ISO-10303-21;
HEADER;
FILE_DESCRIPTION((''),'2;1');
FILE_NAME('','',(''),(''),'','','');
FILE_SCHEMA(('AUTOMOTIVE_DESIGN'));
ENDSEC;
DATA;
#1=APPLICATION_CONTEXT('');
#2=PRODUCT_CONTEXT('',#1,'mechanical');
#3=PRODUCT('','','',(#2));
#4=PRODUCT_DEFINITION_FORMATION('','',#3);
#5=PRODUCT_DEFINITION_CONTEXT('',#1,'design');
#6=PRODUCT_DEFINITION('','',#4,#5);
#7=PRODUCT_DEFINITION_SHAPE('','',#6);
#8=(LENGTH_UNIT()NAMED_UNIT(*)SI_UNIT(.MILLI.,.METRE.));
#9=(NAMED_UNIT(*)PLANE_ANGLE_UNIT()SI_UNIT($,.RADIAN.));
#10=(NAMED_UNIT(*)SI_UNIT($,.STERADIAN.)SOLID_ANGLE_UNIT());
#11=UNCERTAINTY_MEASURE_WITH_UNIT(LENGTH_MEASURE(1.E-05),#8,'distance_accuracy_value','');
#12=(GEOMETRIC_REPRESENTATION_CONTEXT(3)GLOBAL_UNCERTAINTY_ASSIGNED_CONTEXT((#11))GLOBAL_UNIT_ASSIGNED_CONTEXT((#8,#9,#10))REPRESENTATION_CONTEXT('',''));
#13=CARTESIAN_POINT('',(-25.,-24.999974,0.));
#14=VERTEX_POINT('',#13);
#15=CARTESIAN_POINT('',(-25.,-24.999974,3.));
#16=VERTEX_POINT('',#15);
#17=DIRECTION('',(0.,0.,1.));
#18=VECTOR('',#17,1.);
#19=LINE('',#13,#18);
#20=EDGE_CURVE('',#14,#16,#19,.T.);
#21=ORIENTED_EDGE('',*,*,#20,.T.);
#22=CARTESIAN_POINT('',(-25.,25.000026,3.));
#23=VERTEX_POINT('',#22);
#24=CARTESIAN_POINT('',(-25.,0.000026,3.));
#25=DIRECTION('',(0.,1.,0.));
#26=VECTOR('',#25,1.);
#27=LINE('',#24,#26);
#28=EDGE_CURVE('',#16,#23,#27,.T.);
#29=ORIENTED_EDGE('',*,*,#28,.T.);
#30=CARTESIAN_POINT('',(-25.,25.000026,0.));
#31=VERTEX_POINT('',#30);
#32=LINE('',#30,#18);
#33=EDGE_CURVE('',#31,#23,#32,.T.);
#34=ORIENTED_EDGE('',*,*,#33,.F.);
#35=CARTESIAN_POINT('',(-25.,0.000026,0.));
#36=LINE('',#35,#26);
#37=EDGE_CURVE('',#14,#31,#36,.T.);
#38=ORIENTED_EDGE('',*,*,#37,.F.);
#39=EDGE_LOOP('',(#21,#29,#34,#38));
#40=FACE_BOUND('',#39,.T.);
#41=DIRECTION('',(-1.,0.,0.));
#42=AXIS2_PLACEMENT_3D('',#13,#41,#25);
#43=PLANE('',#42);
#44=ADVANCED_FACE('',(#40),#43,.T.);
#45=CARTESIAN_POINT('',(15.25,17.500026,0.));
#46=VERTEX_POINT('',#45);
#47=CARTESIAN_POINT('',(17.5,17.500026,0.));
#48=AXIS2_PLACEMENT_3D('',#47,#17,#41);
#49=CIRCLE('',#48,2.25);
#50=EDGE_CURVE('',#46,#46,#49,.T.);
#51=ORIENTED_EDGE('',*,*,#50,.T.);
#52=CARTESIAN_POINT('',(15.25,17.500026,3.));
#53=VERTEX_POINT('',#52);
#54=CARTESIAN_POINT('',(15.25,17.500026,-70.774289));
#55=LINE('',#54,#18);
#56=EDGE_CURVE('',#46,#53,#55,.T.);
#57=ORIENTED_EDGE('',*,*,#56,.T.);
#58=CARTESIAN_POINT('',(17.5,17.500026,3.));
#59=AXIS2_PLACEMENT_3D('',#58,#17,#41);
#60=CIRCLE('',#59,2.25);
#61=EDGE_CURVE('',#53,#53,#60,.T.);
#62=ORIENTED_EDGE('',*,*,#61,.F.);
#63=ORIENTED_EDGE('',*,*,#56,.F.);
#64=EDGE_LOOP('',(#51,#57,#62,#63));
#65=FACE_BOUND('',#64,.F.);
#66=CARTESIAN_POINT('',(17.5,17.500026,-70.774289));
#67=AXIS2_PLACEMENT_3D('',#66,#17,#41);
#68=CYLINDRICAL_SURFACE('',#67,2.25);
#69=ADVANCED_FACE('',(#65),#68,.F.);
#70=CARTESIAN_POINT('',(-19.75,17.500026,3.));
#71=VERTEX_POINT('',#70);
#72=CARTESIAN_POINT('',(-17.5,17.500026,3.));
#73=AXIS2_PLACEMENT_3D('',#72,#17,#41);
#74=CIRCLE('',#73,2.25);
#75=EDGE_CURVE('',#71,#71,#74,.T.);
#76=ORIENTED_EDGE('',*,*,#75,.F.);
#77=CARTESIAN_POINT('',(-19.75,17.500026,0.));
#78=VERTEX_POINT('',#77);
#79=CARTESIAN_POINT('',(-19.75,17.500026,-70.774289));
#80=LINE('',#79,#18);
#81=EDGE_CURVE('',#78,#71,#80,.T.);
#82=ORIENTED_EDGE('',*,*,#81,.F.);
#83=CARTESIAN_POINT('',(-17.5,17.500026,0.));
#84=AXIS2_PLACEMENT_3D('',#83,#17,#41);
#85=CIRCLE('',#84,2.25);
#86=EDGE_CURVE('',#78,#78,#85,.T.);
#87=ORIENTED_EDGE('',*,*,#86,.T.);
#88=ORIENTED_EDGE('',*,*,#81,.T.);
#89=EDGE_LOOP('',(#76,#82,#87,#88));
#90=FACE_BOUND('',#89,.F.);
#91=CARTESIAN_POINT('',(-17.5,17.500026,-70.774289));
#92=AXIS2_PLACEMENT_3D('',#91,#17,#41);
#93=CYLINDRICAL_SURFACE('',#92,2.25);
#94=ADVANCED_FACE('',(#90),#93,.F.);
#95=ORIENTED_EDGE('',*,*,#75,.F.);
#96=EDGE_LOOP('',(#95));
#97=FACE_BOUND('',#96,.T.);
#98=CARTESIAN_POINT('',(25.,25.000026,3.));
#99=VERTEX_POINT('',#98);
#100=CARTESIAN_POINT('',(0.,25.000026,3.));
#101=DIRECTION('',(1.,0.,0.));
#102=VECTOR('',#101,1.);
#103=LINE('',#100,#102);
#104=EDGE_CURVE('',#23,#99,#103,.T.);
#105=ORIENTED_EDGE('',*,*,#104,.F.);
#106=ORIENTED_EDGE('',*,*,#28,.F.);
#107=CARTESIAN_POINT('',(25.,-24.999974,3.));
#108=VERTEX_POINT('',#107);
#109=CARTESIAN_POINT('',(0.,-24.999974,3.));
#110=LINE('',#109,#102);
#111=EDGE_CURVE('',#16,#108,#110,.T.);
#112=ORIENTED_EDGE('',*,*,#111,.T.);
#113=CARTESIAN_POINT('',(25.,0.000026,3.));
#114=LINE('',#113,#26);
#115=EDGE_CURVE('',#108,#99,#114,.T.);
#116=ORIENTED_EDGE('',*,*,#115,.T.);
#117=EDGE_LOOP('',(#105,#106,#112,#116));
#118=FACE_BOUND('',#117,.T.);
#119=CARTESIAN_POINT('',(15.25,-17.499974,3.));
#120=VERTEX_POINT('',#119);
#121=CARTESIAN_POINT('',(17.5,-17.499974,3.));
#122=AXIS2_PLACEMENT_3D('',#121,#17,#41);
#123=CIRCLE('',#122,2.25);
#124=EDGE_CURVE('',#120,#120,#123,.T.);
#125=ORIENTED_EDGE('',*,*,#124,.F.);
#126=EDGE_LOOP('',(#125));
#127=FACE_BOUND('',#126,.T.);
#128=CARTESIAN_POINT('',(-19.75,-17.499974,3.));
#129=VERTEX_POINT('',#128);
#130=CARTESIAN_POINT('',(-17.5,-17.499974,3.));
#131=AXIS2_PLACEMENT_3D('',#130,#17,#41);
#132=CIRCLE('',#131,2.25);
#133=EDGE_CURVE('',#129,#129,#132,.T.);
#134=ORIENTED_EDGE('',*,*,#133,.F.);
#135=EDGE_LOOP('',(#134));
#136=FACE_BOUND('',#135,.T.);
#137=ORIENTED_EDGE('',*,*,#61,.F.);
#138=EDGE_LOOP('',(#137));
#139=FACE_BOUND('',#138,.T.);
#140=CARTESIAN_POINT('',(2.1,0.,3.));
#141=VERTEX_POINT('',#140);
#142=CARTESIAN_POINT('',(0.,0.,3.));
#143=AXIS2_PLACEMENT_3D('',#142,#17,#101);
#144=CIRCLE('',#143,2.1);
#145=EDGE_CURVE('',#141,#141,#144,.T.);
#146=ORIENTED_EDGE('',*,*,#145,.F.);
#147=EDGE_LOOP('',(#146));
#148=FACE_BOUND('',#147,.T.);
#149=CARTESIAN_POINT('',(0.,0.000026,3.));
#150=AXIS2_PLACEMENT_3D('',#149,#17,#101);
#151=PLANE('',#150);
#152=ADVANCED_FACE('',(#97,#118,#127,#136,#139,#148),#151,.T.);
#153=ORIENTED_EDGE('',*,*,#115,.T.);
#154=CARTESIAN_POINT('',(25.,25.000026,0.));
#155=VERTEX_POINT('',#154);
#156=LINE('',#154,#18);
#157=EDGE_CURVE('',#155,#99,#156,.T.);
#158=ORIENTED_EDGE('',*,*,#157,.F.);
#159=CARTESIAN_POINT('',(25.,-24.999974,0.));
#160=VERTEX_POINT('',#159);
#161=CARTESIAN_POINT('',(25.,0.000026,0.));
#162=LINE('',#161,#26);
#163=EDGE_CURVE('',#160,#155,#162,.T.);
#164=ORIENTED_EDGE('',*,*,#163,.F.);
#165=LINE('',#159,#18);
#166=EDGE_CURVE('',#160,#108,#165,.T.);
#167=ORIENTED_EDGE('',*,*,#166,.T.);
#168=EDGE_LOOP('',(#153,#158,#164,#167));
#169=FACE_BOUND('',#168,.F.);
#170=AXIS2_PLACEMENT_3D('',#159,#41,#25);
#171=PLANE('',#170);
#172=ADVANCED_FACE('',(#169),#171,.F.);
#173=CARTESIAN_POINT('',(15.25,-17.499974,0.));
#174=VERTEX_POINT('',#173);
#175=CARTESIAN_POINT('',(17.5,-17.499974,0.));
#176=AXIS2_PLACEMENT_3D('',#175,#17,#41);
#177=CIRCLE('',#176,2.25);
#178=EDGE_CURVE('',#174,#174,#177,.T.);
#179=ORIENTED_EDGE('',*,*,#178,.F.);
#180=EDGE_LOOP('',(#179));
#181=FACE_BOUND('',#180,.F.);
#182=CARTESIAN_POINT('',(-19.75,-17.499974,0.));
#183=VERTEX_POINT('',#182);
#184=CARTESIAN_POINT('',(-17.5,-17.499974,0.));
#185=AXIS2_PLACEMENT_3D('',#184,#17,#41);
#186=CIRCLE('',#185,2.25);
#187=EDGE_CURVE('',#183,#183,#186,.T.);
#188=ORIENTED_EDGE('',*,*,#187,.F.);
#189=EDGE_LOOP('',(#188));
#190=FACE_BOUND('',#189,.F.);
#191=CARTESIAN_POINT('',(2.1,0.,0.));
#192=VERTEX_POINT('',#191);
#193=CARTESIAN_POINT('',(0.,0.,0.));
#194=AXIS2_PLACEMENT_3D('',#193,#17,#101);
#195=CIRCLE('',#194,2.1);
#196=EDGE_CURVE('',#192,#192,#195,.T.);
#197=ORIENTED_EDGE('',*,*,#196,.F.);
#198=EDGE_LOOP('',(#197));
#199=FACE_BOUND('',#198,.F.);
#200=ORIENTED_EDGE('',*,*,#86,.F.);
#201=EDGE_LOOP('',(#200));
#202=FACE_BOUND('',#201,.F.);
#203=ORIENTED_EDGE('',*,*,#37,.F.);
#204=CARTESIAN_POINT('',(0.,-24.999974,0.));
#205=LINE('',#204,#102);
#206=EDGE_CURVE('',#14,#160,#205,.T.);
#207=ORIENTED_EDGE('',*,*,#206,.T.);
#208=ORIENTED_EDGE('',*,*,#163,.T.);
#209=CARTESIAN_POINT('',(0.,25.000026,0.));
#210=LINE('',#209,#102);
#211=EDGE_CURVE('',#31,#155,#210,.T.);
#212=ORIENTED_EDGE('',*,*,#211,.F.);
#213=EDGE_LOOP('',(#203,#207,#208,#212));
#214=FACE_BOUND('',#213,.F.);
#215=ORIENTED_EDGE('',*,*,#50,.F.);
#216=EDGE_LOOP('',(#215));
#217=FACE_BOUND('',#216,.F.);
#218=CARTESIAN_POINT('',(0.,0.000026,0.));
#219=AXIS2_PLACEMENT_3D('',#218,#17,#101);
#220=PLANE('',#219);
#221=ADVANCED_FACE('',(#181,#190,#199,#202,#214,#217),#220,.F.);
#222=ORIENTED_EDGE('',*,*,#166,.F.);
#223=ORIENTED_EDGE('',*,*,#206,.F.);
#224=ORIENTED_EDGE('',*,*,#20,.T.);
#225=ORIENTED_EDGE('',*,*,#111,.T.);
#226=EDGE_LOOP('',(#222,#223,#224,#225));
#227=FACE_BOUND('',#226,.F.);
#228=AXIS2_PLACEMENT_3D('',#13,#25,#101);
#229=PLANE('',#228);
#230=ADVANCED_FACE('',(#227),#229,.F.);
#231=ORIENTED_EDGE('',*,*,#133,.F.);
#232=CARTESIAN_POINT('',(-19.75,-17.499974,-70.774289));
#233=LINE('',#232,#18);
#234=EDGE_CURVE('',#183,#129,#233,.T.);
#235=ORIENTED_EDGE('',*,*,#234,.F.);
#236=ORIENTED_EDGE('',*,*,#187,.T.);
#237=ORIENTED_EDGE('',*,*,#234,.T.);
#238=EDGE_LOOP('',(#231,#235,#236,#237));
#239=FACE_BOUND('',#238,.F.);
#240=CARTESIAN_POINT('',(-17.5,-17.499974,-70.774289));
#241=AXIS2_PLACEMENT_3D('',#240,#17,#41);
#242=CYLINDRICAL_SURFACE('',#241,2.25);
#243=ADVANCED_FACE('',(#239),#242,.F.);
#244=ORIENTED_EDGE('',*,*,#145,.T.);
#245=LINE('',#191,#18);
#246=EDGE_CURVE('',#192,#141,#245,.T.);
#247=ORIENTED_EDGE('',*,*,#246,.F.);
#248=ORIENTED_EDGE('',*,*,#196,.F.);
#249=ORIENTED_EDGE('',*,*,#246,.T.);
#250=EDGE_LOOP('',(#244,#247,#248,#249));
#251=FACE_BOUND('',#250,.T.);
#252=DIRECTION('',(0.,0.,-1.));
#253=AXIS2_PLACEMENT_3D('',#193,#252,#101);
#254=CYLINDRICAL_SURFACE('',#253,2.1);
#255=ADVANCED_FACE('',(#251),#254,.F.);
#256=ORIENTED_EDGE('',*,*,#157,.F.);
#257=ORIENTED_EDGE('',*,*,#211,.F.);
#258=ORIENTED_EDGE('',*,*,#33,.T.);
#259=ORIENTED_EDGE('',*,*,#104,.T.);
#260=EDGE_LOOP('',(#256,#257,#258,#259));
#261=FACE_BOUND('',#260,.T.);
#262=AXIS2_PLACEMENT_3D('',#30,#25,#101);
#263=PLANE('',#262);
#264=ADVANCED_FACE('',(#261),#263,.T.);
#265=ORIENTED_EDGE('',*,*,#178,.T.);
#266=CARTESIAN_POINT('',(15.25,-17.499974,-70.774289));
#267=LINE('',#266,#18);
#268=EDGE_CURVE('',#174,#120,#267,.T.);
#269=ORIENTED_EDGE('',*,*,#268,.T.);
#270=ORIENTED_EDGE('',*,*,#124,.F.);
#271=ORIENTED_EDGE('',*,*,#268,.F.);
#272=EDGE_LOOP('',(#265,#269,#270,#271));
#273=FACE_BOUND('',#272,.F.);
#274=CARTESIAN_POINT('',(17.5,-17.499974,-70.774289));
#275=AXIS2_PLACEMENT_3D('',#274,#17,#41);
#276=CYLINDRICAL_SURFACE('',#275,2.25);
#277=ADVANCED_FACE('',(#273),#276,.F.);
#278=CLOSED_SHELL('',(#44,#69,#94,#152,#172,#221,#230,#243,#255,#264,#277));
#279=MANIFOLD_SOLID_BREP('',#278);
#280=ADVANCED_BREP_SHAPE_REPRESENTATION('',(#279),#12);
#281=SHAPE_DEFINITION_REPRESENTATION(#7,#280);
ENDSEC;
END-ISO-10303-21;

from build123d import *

# Parameters (mm, degrees)
F0_W     = 50
F0_H     = 50
F0_R     = 2
F0_R_2   = 2.1
F1_DEPTH = 3
F2_D     = 4.5


# Not quite as in the source:
# - a feature names something its author has since deleted; it is built from what else it names


with BuildPart() as f1:
    # F0 (on Top) → F1 (new body)
    with BuildSketch(Plane.XY):
        with Locations((-3.725e-07, 2.55218e-05)):
            Rectangle(F0_W, F0_H)
        with Locations((-17.5000003725, -17.4999744782)):
            Circle(F0_R, mode=Mode.SUBTRACT)
        with Locations((17.4999996275, -17.4999744782)):
            Circle(F0_R, mode=Mode.SUBTRACT)
        Circle(F0_R_2, mode=Mode.SUBTRACT)
        with Locations((-17.5000003725, 17.5000255218)):
            Circle(F0_R, mode=Mode.SUBTRACT)
        with Locations((17.4999996275, 17.5000255218)):
            Circle(F0_R, mode=Mode.SUBTRACT)
    extrude(amount=F1_DEPTH)

    # F2 (through all)
    with Locations(Plane(origin=(0, 0, 0), x_dir=(1, 0, 0), z_dir=(0, 0, -1))):
        with Locations((-17.5000003725, 17.4999744782), (-17.5000003725, -17.5000255218), (17.4999996275, -17.5000255218), (17.4999996275, 17.4999744782)):
            Hole(F2_D / 2)


solid = f1.part
